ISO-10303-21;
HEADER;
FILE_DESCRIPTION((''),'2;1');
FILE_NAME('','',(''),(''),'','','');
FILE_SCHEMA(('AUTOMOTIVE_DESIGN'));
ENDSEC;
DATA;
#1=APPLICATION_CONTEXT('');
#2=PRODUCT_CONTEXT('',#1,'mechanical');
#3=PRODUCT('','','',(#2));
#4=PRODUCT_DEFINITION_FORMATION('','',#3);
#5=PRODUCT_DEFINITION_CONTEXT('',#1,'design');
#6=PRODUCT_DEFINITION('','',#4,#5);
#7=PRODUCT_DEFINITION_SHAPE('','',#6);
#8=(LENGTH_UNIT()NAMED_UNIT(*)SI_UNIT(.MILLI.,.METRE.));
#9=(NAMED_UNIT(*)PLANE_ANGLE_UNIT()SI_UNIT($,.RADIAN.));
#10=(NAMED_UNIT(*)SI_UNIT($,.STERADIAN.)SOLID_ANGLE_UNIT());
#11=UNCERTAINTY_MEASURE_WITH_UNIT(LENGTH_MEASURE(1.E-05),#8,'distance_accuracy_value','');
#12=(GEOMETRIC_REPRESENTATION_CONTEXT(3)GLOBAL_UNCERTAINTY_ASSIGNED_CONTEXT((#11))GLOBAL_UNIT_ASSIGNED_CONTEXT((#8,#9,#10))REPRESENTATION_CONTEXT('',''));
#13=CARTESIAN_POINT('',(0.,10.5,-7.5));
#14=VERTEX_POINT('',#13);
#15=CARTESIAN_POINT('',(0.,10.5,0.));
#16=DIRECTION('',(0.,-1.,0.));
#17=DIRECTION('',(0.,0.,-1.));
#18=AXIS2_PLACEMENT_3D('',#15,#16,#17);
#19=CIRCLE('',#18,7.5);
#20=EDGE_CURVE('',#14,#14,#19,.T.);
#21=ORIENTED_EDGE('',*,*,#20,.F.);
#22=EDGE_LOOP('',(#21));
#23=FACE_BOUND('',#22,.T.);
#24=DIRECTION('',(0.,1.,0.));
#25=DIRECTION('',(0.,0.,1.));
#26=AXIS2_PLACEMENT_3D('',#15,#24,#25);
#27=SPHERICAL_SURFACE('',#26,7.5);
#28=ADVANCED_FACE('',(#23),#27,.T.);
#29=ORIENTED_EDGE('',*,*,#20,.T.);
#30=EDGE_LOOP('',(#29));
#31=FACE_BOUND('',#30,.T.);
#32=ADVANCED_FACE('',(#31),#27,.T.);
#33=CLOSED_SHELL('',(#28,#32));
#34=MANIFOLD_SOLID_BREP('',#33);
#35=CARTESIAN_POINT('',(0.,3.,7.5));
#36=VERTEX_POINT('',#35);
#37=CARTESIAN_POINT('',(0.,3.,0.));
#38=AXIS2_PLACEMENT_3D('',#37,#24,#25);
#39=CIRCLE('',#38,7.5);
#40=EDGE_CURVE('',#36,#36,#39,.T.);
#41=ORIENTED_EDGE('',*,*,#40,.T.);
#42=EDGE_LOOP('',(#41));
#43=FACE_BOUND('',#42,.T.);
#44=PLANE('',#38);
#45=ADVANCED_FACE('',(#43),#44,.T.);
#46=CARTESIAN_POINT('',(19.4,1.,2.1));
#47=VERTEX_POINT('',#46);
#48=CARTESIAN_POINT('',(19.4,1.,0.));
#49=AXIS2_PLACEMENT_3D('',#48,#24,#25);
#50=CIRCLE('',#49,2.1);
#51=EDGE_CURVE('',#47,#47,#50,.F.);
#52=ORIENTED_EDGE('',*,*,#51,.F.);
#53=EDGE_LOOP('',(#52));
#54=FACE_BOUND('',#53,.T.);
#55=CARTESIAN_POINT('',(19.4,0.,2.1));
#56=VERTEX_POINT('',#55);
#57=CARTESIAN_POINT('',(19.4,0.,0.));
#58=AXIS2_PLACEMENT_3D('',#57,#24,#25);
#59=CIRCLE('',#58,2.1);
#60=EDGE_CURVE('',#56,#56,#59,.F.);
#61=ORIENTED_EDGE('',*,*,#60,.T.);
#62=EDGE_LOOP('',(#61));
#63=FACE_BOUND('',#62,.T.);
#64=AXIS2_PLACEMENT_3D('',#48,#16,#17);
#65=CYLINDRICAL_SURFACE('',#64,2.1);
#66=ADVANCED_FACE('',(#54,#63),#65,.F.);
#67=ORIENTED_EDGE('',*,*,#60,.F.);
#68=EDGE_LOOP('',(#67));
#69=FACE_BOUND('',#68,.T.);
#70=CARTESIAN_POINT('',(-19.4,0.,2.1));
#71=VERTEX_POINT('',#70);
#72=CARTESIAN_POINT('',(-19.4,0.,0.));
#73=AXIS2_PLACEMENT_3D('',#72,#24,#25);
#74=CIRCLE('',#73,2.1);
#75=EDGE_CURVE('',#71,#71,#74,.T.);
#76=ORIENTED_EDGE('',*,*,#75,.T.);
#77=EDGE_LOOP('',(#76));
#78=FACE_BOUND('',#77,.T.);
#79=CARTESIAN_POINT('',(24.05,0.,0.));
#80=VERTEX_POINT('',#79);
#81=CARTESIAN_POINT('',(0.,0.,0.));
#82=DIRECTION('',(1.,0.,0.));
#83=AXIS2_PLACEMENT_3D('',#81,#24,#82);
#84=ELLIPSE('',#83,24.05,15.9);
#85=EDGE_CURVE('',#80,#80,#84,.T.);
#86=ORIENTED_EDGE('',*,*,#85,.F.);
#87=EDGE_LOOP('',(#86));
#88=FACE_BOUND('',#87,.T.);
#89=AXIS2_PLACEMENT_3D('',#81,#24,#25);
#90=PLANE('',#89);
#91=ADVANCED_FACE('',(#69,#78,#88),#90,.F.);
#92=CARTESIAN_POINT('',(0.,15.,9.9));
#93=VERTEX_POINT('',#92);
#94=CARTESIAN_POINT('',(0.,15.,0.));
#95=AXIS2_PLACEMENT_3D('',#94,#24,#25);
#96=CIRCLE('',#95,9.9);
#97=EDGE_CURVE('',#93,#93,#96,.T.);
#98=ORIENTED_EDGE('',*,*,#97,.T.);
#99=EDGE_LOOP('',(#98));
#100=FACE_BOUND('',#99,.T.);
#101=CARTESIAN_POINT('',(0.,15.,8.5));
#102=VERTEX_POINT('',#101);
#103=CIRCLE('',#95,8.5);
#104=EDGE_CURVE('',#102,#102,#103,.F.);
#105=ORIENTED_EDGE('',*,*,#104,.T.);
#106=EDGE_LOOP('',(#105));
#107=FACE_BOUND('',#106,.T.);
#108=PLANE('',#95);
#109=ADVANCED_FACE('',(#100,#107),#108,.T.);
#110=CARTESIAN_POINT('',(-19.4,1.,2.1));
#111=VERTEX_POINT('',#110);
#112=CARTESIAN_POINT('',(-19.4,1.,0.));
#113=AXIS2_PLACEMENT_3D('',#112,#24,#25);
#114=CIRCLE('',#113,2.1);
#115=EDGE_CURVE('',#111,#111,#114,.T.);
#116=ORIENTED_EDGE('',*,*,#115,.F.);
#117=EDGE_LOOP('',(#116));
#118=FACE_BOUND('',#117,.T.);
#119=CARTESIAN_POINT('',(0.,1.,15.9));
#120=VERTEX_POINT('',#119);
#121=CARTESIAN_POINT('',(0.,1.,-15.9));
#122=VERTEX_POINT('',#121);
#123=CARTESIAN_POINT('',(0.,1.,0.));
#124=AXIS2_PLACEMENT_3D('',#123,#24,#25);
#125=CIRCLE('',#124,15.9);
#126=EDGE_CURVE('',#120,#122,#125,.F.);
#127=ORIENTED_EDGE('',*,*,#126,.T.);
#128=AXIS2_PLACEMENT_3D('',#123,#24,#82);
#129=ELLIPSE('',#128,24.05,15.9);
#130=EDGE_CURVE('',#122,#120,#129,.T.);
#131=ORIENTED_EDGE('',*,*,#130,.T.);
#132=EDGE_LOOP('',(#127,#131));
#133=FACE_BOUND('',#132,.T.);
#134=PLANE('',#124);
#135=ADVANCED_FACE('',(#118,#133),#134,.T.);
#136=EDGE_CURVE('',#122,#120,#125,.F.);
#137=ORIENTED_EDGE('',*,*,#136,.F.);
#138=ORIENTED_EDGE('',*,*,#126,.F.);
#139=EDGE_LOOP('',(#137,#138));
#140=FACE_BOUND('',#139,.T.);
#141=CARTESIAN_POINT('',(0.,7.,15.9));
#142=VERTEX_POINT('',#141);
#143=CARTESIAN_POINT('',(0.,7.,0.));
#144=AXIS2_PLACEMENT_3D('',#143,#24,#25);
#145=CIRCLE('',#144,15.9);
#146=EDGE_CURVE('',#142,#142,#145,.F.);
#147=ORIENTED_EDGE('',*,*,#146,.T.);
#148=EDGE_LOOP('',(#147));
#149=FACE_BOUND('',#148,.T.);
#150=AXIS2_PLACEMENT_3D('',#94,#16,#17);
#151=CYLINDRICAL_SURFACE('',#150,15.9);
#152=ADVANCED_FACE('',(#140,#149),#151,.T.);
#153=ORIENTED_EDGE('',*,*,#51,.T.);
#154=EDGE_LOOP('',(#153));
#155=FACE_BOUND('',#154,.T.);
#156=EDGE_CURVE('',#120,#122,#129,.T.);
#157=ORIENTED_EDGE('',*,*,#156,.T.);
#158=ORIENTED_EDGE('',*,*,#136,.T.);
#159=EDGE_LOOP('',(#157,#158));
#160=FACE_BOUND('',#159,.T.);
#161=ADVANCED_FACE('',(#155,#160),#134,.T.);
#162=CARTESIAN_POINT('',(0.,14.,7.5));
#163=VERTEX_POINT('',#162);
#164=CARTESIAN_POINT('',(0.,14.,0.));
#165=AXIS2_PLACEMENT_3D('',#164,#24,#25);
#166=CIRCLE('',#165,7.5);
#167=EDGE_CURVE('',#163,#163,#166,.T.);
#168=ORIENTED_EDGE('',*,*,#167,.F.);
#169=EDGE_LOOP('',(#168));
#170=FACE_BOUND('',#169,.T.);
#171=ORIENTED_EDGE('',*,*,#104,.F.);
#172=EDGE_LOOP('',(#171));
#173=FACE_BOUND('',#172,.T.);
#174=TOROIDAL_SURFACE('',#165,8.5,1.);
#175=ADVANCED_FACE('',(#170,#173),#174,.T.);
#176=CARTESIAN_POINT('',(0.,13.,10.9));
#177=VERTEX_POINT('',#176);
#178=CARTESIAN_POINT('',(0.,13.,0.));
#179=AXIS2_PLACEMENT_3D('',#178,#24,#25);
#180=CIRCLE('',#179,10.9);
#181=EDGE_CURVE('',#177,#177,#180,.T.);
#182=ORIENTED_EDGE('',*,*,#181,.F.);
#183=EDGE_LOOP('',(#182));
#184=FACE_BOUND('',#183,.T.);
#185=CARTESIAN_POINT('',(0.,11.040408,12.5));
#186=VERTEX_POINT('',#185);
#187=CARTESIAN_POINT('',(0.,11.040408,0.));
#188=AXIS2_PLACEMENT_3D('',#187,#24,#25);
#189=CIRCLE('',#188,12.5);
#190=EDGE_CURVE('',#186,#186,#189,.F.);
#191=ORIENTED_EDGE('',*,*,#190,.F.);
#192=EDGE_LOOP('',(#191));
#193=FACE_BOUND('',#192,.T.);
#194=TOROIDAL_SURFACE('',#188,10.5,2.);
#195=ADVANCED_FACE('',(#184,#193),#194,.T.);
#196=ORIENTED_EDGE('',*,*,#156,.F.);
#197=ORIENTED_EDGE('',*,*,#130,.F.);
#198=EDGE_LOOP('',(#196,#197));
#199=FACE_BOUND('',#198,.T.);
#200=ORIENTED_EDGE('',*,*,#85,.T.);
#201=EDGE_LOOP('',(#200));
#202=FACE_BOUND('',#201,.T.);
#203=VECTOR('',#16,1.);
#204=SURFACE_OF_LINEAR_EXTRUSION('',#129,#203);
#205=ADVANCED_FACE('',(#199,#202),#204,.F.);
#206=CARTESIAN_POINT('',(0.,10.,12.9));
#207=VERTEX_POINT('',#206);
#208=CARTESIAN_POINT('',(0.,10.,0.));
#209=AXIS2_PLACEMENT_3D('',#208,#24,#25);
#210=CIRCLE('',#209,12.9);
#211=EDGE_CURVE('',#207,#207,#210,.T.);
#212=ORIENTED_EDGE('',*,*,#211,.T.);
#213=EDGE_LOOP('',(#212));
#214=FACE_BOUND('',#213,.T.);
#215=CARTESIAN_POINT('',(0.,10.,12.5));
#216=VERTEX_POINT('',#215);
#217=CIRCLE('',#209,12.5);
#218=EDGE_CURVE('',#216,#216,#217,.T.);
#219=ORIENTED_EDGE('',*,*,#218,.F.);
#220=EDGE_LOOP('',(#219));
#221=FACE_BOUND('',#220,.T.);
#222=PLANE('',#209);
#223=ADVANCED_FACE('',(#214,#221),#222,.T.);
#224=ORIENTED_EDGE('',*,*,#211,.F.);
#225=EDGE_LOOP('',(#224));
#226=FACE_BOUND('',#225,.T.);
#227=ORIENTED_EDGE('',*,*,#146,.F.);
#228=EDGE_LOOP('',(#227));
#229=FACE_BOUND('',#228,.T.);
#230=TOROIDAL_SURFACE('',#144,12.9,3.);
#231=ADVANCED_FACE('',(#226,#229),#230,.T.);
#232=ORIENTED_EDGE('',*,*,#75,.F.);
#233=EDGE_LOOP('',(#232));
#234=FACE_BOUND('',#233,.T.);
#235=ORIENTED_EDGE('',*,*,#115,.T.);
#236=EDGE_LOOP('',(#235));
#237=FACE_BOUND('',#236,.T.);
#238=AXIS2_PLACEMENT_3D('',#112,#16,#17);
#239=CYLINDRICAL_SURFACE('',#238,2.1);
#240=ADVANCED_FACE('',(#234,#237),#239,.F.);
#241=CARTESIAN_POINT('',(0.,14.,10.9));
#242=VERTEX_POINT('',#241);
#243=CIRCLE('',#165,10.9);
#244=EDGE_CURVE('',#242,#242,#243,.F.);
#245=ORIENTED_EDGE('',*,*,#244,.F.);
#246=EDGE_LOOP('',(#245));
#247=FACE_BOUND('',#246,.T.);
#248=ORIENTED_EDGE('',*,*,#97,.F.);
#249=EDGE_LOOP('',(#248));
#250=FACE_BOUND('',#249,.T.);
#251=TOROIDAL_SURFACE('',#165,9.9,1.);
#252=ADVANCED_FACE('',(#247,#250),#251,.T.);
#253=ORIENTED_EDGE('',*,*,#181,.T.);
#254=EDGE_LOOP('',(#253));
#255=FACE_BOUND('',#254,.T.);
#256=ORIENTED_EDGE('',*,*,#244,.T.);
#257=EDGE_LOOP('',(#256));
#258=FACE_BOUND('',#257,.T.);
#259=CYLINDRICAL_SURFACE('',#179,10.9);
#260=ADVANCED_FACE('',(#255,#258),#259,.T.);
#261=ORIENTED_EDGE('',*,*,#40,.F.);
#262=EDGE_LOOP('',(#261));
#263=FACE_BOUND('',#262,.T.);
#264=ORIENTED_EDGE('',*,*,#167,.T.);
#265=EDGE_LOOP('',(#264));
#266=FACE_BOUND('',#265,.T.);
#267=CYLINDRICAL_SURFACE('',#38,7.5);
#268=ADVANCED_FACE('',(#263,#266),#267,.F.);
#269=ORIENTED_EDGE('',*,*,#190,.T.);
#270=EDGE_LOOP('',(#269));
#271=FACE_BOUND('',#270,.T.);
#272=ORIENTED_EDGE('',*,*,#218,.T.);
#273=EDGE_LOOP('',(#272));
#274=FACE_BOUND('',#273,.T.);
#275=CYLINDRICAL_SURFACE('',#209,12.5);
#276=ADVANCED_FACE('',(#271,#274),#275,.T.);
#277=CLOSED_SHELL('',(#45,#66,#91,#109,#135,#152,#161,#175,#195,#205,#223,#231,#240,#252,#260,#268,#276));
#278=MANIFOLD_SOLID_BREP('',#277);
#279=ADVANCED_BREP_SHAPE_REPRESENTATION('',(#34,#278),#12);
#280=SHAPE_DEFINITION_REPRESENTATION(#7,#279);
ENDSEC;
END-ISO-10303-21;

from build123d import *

# Parameters (mm, degrees)
SKETCH_1_RX         = 24.05
SKETCH_1_RY         = 15.9
SKETCH_1_R          = 2.1
EXTRUDE_1_DEPTH     = 1
SKETCH_1_3_R        = 15.9
EXTRUDE_2_DEPTH     = 15
SKETCH_2_R          = 7.5
CUT_EXTRUDE_2_DEPTH = 12
SKETCH_5_R          = 7.5
EXTRUDE_4_DEPTH     = 15
FILLET_4_R          = 7.5
CUT_EXTRUDE_START   = -5
SKETCH_6_R          = 15.9
SKETCH_6_R_2        = 12.5
CUT_EXTRUDE_3_DEPTH = 5
CUT_EXTRUDE_START_2 = -2
SKETCH_7_R          = 12.5
SKETCH_7_R_2        = 10.9
CUT_EXTRUDE_4_DEPTH = 2
FILLET_5_R          = 1
FILLET_8_R          = 3
FILLET_9_R          = 2


# Some blends are built 0.0001 mm under size
with BuildPart() as part:
    # 草图1 → 凸台-拉伸1 (new body)
    with BuildSketch(Plane(origin=(0, 0, 0), x_dir=(1, 0, 0), z_dir=(0, 1, 0))):
        with Locations((0, 0)):
            Ellipse(SKETCH_1_RX, SKETCH_1_RY)
        with Locations(Location((-19.4, 0, 0), (0, 0, 270))):
            Circle(SKETCH_1_R, mode=Mode.SUBTRACT)
        with Locations(Location((19.4, 0, 0), (0, 0, 270))):
            Circle(SKETCH_1_R, mode=Mode.SUBTRACT)
    extrude(amount=EXTRUDE_1_DEPTH)

    # 草图1<3> → 凸台-拉伸2 (add)
    with BuildSketch(Plane(origin=(0, 0, 0), x_dir=(1, 0, 0), z_dir=(0, 1, 0))):
        with Locations(Location((0, 0, 0), (0, 0, 270))):
            Circle(SKETCH_1_3_R)
    extrude(amount=EXTRUDE_2_DEPTH)

    # 草图2 → 切除-拉伸2 (cut)
    with BuildSketch(Plane(origin=(0, 15, 0), x_dir=(1, 0, 0), z_dir=(0, 1, 0))):
        with Locations(Location((0, 0, 0), (0, 0, 270))):
            Circle(SKETCH_2_R)
    extrude(amount=-CUT_EXTRUDE_2_DEPTH, mode=Mode.SUBTRACT)

    # 草图6 → 切除-拉伸3 (cut)
    with BuildSketch(Plane(origin=(0, 15, 0), x_dir=(1, 0, 0), z_dir=(0, 1, 0)).offset(CUT_EXTRUDE_START)):
        with Locations(Location((0, 0, 0), (0, 0, 270))):
            Circle(SKETCH_6_R)
        with Locations(Location((0, 0, 0), (0, 0, 270))):
            Circle(SKETCH_6_R_2, mode=Mode.SUBTRACT)
    extrude(amount=CUT_EXTRUDE_3_DEPTH, mode=Mode.SUBTRACT)

    # 草图7 → 切除-拉伸4 (cut)
    with BuildSketch(Plane(origin=(0, 15, 0), x_dir=(1, 0, 0), z_dir=(0, 1, 0)).offset(CUT_EXTRUDE_START_2)):
        with Locations(Location((0, 0, 0), (0, 0, 270))):
            Circle(SKETCH_7_R)
        with Locations(Location((0, 0, 0), (0, 0, 270))):
            Circle(SKETCH_7_R_2, mode=Mode.SUBTRACT)
    extrude(amount=CUT_EXTRUDE_4_DEPTH, mode=Mode.SUBTRACT)

    # 圆角5
    fillet_5_edges = [part.edges().sort_by_distance(p)[0] for p in [
        (0, 15, -7.5),
        (0, 15, -10.9),
    ]]
    fillet(fillet_5_edges, radius=FILLET_5_R)

    # 圆角8
    fillet_8_edges = [part.edges().sort_by_distance(p)[0] for p in [
        (0, 10, -15.9),
    ]]
    fillet(fillet_8_edges, radius=FILLET_8_R)

    # 圆角9
    # the kernel refuses this fillet: 2 mm, written as the material it takes off along each edge
    with BuildSketch(Plane(origin=(0, 13, 0), x_dir=(0, 0, 1), z_dir=(-1, 0, 0))) as fillet_9_piece_1:
        with BuildLine():
            CenterArc((10.5, -1.959591794), FILLET_9_R, 0, 78.463040967)
            Line((10.9, 0), (10.908, 0.039191836))
            ThreePointArc((10.908, 0.039191836), (11.7, 0.04), (12.5, 0.04))
            Line((12.5, 0.04), (12.54, 0))
            Line((12.54, 0), (12.54, -1.959591794))
            Line((12.54, -1.959591794), (12.5, -1.959591794))
        make_face()
    revolve(axis=Axis((0, 13, 0), (0, 1, 0)), mode=Mode.SUBTRACT)


with BuildPart() as body_2:
    # 草图5 → 凸台-拉伸4 (new body)
    with BuildSketch(Plane(origin=(0, 3, 0), x_dir=(1, 0, 0), z_dir=(0, 1, 0))):
        with Locations(Location((0, 0, 0), (0, 0, 270))):
            Circle(SKETCH_5_R)
    extrude(amount=EXTRUDE_4_DEPTH)

    # 圆角4
    fillet_4_edges = [body_2.edges().sort_by_distance(p)[0] for p in [
        (0, 3, -7.5),
        (0, 18, -7.5),
    ]]
    fillet(fillet_4_edges, radius=FILLET_4_R - 0.0001)  # a hair under: the kernel refuses the full size


solid = Compound([part.part, body_2.part])
